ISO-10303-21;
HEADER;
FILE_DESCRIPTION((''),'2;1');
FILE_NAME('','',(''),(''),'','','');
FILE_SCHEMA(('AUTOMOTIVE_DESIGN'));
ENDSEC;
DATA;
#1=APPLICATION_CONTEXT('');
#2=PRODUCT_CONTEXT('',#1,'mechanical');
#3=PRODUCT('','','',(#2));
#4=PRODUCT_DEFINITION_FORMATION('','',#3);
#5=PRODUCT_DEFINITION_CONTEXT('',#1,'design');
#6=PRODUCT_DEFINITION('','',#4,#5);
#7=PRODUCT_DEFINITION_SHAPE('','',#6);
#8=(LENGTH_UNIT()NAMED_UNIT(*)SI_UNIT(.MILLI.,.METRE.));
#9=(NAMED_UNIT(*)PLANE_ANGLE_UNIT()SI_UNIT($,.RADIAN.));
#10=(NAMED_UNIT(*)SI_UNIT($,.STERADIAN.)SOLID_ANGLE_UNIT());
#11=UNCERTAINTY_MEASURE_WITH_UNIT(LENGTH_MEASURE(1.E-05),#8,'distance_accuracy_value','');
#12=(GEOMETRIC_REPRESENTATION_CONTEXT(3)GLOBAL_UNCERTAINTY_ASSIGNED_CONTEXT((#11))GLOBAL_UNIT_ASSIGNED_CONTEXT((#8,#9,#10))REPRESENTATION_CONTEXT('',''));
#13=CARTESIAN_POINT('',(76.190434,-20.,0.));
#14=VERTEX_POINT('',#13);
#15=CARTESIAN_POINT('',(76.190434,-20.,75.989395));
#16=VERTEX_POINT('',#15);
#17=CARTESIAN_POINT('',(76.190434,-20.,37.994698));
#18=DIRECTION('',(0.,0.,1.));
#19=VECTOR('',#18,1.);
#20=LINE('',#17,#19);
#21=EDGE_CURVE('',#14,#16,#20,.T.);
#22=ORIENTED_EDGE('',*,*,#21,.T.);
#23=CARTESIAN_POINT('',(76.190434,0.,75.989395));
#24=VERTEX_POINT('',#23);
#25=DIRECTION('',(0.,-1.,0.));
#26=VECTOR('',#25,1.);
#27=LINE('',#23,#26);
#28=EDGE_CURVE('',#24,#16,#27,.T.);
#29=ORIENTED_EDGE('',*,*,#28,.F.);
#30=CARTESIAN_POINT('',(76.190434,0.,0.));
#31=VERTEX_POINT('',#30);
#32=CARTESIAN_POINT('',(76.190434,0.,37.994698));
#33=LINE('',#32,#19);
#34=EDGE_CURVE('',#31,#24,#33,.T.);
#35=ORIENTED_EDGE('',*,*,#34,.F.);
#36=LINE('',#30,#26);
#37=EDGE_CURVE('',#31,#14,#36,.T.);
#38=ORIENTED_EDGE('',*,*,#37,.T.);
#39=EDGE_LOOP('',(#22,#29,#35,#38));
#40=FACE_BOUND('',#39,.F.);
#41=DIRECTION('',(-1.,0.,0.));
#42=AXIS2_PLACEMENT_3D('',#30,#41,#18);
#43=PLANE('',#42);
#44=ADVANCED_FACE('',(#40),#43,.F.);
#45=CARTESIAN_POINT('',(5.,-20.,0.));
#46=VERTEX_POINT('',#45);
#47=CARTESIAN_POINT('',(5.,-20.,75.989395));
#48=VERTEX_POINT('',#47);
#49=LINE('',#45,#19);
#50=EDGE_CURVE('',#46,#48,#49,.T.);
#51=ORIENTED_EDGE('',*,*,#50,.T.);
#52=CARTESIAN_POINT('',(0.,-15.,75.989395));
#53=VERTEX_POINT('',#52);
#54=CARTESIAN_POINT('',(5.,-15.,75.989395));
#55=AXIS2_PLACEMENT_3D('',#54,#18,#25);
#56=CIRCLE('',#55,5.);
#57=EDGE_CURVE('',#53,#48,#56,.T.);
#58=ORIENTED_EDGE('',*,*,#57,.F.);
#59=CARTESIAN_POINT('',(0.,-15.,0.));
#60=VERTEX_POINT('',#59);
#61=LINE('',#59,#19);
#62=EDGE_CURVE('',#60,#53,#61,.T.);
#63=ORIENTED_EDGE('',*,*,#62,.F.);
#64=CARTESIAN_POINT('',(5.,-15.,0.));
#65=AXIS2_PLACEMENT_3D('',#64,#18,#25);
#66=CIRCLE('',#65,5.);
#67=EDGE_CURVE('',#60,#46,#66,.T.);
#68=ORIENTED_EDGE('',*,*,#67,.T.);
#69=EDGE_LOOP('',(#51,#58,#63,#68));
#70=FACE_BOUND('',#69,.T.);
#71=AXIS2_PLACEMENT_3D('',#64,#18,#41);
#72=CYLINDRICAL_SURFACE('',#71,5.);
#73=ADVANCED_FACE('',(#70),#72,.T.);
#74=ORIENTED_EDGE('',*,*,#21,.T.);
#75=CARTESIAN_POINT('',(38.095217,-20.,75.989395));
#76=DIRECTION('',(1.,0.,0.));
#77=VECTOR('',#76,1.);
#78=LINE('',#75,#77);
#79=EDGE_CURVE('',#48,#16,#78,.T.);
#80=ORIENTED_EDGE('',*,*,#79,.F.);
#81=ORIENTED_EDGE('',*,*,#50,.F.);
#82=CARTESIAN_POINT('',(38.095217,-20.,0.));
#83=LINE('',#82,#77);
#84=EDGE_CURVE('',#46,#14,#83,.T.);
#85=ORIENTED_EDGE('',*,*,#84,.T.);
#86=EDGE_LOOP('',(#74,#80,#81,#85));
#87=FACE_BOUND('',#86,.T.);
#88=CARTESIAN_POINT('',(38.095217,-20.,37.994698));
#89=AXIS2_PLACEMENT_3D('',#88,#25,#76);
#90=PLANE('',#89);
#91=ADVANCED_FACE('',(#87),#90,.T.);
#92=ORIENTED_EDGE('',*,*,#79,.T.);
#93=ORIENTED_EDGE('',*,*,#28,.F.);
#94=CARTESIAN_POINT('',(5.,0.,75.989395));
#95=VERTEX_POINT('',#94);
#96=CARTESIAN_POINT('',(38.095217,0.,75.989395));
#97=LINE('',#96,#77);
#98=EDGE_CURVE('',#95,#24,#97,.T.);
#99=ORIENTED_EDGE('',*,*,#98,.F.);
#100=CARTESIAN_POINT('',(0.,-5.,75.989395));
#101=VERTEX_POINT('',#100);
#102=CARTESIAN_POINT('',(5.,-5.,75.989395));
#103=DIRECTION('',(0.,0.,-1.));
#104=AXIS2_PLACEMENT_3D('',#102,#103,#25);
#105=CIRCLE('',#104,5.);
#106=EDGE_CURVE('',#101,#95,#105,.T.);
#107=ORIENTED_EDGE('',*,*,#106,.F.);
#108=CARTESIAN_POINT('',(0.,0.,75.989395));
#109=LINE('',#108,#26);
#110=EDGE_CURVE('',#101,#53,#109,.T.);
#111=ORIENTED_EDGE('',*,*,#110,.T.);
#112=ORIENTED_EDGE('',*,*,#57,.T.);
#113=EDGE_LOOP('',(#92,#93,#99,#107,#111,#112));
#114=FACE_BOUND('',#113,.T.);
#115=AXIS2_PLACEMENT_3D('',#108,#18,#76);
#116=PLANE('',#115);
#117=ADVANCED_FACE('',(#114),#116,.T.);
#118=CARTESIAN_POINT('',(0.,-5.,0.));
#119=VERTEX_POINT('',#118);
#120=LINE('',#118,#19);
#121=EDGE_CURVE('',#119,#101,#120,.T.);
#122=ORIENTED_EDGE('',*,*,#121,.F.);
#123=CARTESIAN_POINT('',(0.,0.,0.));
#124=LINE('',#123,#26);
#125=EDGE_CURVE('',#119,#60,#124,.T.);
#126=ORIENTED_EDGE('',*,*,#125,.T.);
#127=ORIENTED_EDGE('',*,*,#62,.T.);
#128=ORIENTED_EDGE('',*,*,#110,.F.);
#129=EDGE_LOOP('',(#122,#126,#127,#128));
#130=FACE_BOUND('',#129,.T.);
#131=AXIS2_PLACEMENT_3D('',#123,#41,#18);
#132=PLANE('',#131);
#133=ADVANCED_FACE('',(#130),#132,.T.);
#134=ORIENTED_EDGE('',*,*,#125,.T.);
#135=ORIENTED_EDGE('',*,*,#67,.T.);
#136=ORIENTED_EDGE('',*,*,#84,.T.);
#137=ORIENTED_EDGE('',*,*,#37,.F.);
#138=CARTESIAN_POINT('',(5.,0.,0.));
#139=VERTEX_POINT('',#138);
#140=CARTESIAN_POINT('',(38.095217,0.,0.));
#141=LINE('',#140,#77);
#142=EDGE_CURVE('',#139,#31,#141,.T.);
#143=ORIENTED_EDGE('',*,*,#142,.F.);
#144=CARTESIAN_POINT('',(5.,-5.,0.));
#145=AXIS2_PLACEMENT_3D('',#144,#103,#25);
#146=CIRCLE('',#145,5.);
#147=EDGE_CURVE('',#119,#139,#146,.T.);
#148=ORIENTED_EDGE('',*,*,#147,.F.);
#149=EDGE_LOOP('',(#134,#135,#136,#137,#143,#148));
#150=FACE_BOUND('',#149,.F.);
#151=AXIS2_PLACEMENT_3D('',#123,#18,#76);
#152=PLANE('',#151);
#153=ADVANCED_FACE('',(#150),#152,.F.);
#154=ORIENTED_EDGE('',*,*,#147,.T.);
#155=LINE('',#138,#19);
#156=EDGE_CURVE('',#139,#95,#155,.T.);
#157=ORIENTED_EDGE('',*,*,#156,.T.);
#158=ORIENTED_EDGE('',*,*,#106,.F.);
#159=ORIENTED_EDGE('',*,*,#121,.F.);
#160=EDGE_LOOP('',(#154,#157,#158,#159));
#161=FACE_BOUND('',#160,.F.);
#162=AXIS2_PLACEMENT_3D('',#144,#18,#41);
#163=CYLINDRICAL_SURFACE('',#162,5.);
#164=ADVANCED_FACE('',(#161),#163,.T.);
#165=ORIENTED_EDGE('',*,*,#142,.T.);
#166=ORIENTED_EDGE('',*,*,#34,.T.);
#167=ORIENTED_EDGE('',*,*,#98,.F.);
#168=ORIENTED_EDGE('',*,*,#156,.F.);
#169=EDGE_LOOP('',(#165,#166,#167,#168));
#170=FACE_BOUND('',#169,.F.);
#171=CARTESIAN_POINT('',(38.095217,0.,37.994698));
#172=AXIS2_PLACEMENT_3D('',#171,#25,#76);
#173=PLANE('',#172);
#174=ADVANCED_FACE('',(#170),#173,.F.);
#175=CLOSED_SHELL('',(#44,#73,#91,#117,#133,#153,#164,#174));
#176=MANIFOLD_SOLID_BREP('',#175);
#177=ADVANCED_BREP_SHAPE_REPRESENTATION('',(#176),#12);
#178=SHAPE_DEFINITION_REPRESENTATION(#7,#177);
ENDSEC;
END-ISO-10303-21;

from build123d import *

# Parameters (mm, degrees)
F0_W     = 76.1904343963
F0_H     = 75.98939538
F1_DEPTH = 20
F4_R     = 5


# Not quite as in the source:
# - the program builds the solid bodies; features that only make, move or delete a surface that nothing else refers to are left out


with BuildPart() as f1:
    # F0 (on Front) → F1 (new body)
    with BuildSketch(Plane.XZ):
        with Locations((38.0952171981, 37.99469769)):
            Rectangle(F0_W, F0_H)
    extrude(amount=F1_DEPTH)

    # F4
    f4_edges = [f1.edges().sort_by_distance(p)[0] for p in [
        (0, -20, 37.994698),
        (0, 0, 37.994698),
    ]]
    fillet(f4_edges, radius=F4_R)


solid = f1.part
